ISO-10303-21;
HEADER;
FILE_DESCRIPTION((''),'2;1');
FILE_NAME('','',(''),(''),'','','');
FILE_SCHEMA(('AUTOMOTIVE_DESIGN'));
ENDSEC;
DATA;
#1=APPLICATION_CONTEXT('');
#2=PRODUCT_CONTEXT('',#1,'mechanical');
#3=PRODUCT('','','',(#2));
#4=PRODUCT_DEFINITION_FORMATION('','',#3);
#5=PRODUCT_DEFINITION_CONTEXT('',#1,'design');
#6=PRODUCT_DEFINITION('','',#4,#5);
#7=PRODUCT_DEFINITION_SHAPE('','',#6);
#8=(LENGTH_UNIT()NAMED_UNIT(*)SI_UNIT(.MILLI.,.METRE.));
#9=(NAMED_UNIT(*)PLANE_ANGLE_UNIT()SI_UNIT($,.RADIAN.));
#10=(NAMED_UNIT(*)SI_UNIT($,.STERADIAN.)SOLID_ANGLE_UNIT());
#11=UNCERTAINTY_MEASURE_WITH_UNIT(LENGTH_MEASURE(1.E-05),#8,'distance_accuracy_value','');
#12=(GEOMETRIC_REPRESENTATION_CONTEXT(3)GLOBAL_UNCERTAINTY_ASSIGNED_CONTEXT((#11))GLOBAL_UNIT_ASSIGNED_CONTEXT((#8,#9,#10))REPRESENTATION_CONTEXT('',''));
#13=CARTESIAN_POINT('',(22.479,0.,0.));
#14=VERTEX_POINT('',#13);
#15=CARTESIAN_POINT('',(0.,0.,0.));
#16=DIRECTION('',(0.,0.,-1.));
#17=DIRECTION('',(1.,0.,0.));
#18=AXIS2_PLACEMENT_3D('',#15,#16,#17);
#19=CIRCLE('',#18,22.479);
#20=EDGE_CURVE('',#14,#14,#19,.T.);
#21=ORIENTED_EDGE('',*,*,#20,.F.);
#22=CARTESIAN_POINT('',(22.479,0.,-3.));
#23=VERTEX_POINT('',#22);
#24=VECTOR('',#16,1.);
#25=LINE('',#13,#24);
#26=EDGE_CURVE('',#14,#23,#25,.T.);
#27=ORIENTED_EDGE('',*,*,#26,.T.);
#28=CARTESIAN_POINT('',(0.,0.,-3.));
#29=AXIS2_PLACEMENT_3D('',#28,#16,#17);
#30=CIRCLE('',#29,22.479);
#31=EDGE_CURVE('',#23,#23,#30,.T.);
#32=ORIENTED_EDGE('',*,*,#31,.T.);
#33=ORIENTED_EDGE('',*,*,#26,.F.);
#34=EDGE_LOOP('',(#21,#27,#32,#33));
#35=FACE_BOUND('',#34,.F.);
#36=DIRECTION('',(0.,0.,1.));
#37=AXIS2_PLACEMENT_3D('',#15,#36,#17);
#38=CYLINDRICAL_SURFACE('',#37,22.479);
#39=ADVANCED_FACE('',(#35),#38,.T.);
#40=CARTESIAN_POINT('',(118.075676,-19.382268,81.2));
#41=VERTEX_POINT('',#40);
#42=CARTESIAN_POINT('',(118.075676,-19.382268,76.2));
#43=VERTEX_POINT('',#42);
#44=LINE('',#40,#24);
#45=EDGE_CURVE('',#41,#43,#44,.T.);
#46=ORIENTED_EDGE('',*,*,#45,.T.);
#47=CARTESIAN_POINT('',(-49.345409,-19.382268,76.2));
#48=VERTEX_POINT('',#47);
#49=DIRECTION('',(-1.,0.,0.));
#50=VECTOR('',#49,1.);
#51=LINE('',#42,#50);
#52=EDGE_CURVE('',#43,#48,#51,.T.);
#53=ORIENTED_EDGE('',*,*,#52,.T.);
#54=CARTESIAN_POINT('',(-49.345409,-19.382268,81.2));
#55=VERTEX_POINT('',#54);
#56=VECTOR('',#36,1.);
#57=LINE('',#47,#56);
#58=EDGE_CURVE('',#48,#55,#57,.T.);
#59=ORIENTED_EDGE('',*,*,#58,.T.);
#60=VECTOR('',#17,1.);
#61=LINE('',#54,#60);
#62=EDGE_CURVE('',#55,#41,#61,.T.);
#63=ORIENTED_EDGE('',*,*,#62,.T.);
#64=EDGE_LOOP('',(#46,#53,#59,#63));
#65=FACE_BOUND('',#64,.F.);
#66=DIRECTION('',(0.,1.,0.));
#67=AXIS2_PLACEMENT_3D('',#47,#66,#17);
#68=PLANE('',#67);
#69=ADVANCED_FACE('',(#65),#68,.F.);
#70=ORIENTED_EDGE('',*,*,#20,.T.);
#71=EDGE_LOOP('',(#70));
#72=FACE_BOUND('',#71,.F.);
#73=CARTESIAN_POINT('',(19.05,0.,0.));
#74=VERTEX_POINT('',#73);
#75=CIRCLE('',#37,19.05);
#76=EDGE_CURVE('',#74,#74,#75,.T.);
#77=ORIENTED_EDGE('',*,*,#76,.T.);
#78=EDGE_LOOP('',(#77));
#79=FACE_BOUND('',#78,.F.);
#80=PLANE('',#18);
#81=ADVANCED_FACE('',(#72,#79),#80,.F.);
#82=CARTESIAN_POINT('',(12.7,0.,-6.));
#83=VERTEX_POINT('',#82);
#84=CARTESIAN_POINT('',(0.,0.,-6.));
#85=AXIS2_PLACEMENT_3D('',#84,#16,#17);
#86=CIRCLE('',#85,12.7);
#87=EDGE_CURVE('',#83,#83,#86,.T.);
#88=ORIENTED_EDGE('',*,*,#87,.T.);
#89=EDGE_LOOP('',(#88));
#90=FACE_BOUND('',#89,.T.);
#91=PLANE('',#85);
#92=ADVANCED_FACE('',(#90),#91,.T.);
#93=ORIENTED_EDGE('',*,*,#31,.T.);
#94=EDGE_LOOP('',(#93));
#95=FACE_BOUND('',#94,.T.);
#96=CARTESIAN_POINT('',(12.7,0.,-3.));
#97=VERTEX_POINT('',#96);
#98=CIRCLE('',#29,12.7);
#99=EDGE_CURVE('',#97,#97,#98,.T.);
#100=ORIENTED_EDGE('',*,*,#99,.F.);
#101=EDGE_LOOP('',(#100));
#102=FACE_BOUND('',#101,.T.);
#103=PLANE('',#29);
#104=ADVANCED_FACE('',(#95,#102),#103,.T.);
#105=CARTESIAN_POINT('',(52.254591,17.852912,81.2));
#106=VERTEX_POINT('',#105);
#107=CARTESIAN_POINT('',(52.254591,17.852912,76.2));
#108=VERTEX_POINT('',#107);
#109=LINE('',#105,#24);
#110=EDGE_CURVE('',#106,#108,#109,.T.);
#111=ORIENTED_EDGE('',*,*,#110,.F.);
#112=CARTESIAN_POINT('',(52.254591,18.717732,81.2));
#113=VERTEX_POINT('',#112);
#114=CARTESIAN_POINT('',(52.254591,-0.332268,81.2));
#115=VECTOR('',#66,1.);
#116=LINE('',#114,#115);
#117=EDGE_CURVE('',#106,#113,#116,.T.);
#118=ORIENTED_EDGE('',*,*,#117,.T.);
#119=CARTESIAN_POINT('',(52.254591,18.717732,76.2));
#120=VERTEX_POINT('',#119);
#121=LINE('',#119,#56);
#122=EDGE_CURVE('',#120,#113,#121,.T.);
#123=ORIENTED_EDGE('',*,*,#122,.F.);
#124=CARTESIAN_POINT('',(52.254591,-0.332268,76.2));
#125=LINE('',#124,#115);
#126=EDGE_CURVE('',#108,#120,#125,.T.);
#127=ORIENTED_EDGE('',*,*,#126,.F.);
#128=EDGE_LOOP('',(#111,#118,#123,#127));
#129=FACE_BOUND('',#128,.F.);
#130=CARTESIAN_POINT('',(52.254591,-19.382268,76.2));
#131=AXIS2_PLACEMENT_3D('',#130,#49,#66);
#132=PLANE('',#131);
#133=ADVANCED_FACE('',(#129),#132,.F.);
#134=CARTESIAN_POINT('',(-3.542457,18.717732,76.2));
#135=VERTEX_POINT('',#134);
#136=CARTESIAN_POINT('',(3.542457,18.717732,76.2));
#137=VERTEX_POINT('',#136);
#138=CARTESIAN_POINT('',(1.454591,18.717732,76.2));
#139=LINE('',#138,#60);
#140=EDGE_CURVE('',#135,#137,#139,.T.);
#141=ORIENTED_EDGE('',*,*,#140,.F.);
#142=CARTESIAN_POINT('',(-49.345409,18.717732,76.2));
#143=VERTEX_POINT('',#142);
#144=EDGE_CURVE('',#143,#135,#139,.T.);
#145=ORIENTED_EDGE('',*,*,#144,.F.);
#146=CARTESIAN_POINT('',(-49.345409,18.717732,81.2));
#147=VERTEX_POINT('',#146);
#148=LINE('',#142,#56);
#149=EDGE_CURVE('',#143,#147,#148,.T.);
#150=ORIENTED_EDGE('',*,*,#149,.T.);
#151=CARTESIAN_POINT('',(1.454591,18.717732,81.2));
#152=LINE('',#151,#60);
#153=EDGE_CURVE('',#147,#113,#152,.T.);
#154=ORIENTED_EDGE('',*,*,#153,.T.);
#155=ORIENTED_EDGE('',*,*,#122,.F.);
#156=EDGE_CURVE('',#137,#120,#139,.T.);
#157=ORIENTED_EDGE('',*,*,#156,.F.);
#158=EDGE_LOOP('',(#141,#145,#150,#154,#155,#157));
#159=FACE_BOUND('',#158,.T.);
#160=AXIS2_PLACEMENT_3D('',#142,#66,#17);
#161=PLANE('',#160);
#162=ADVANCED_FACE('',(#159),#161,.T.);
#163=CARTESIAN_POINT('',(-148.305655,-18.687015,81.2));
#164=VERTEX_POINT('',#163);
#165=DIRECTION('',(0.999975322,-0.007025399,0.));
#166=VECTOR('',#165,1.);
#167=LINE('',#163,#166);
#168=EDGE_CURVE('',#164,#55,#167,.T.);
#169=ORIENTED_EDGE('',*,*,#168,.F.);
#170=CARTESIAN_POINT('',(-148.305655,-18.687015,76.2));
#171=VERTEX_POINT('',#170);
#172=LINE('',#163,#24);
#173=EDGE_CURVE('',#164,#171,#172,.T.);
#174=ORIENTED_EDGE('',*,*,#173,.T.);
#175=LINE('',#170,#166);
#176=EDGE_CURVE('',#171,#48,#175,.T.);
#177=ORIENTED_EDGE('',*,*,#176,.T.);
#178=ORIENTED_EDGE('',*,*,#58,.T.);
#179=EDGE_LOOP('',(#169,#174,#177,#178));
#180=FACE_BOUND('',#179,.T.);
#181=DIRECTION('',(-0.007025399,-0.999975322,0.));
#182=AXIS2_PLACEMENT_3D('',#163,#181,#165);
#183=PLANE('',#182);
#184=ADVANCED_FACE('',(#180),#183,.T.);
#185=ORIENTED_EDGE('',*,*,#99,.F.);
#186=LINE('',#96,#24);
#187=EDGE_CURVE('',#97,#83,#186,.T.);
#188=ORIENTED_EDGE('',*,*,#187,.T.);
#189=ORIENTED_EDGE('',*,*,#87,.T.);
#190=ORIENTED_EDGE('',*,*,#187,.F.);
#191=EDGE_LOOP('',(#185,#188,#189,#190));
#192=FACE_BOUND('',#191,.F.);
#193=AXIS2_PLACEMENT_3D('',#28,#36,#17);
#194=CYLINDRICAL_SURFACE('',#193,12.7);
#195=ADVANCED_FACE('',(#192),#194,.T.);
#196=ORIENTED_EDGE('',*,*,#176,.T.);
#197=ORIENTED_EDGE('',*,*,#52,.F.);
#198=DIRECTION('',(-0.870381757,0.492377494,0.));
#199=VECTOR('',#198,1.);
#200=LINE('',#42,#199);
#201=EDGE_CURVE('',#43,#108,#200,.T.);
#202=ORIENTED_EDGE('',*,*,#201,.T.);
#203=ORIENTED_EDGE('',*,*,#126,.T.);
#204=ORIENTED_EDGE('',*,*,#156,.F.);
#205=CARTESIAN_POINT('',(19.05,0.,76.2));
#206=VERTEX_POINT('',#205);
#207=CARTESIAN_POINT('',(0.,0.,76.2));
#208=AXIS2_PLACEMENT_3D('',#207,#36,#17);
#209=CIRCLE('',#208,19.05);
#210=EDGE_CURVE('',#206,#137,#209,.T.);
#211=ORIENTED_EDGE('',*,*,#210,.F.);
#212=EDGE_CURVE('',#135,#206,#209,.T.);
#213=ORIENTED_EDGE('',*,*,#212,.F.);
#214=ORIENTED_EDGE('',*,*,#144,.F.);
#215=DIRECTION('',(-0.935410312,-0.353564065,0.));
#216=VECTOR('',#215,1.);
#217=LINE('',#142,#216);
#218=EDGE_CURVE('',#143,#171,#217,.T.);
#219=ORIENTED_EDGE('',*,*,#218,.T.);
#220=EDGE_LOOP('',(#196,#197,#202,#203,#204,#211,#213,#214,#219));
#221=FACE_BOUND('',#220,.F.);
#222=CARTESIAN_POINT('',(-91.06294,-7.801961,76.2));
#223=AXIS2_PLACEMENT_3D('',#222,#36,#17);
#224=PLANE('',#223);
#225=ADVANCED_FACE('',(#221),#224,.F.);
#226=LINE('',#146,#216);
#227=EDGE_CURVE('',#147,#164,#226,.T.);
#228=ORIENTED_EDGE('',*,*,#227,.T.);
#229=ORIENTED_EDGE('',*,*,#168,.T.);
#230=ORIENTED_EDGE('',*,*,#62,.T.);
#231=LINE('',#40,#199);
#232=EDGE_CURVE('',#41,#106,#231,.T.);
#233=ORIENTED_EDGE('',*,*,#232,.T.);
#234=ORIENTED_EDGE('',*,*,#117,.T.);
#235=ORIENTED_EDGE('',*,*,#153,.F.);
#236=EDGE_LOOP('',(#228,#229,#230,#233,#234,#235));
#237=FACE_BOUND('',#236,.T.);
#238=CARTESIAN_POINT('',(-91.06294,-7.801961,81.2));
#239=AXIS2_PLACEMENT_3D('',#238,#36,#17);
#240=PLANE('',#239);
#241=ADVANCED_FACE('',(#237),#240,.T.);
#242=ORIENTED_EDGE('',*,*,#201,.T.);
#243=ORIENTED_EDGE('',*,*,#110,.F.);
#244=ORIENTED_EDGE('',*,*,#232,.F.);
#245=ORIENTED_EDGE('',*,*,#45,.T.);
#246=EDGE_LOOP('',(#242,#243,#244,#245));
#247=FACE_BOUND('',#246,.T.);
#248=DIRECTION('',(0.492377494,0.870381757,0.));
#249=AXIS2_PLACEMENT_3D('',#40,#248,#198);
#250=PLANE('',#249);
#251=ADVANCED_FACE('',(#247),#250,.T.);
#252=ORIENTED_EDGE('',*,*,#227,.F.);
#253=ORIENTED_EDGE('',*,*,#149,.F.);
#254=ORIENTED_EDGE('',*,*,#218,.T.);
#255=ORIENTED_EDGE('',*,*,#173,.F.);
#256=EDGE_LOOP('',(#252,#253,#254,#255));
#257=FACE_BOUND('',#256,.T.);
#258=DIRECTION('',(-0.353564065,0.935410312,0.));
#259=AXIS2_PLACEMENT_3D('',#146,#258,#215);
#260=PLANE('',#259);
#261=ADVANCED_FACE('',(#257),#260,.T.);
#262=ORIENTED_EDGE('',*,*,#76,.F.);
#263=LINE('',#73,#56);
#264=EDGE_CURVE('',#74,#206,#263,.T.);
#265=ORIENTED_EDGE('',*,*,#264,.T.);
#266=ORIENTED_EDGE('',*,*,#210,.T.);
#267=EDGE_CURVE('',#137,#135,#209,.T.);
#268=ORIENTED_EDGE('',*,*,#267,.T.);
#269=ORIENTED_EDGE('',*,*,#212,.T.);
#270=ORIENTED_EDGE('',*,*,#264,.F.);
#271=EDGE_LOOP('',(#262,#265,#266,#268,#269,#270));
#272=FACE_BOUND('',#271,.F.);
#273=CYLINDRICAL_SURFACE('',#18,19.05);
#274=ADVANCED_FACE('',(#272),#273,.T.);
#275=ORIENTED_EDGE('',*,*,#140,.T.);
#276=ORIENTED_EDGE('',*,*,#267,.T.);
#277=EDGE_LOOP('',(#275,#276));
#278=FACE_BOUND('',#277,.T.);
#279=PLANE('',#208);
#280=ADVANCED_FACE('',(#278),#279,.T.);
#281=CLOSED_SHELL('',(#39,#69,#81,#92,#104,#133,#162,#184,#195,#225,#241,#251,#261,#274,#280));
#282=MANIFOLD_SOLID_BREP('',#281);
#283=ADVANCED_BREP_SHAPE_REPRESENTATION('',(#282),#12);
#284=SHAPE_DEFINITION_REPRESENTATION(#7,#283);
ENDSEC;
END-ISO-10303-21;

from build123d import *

# Parameters (mm, degrees)
F0_R     = 19.05
F1_DEPTH = 76.2
F2_W     = 101.6
F2_H     = 38.1
F3_DEPTH = 5
F4_R     = 22.479
F4_R_2   = 19.05
F5_DEPTH = 3
F6_R     = 12.7
F7_DEPTH = 3
F9_DEPTH = 5


with BuildPart() as f1:
    # F0 (on Top) → F1 (new body)
    with BuildSketch(Plane.XY):
        Circle(F0_R)
    extrude(amount=F1_DEPTH)

    # F2 (on face) → F3 (join)
    with BuildSketch(Plane.XY.offset(76.2)):
        with Locations((1.4545911372, -0.3322677247)):
            Rectangle(F2_W, F2_H)
    extrude(amount=F3_DEPTH)

    # F4 (on face) → F5 (join)
    with BuildSketch(Plane(origin=(0, 0, 0), x_dir=(1, 0, 0), z_dir=(0, 0, -1))):
        Circle(F4_R)
        Circle(F4_R_2, mode=Mode.SUBTRACT)
        Circle(F4_R_2)
    extrude(amount=F5_DEPTH)

    # F6 (on face) → F7 (join)
    with BuildSketch(Plane(origin=(0, 0, -3), x_dir=(1, 0, 0), z_dir=(0, 0, -1))):
        Circle(F6_R)
    extrude(amount=F7_DEPTH)

    # F8 (on face) → F9 (join)
    with BuildSketch(Plane.XY.offset(81.2)):
        Polygon((-49.3454088628, -19.3822677247), (-49.3454088628, 18.7177322753), (-148.3056545258, -18.6870153993), align=None)
        Polygon((118.0756762624, -19.3822677247), (52.2545911372, 17.8529117256), (52.2545911372, -19.3822677247), align=None)
    extrude(amount=-F9_DEPTH)


solid = f1.part
